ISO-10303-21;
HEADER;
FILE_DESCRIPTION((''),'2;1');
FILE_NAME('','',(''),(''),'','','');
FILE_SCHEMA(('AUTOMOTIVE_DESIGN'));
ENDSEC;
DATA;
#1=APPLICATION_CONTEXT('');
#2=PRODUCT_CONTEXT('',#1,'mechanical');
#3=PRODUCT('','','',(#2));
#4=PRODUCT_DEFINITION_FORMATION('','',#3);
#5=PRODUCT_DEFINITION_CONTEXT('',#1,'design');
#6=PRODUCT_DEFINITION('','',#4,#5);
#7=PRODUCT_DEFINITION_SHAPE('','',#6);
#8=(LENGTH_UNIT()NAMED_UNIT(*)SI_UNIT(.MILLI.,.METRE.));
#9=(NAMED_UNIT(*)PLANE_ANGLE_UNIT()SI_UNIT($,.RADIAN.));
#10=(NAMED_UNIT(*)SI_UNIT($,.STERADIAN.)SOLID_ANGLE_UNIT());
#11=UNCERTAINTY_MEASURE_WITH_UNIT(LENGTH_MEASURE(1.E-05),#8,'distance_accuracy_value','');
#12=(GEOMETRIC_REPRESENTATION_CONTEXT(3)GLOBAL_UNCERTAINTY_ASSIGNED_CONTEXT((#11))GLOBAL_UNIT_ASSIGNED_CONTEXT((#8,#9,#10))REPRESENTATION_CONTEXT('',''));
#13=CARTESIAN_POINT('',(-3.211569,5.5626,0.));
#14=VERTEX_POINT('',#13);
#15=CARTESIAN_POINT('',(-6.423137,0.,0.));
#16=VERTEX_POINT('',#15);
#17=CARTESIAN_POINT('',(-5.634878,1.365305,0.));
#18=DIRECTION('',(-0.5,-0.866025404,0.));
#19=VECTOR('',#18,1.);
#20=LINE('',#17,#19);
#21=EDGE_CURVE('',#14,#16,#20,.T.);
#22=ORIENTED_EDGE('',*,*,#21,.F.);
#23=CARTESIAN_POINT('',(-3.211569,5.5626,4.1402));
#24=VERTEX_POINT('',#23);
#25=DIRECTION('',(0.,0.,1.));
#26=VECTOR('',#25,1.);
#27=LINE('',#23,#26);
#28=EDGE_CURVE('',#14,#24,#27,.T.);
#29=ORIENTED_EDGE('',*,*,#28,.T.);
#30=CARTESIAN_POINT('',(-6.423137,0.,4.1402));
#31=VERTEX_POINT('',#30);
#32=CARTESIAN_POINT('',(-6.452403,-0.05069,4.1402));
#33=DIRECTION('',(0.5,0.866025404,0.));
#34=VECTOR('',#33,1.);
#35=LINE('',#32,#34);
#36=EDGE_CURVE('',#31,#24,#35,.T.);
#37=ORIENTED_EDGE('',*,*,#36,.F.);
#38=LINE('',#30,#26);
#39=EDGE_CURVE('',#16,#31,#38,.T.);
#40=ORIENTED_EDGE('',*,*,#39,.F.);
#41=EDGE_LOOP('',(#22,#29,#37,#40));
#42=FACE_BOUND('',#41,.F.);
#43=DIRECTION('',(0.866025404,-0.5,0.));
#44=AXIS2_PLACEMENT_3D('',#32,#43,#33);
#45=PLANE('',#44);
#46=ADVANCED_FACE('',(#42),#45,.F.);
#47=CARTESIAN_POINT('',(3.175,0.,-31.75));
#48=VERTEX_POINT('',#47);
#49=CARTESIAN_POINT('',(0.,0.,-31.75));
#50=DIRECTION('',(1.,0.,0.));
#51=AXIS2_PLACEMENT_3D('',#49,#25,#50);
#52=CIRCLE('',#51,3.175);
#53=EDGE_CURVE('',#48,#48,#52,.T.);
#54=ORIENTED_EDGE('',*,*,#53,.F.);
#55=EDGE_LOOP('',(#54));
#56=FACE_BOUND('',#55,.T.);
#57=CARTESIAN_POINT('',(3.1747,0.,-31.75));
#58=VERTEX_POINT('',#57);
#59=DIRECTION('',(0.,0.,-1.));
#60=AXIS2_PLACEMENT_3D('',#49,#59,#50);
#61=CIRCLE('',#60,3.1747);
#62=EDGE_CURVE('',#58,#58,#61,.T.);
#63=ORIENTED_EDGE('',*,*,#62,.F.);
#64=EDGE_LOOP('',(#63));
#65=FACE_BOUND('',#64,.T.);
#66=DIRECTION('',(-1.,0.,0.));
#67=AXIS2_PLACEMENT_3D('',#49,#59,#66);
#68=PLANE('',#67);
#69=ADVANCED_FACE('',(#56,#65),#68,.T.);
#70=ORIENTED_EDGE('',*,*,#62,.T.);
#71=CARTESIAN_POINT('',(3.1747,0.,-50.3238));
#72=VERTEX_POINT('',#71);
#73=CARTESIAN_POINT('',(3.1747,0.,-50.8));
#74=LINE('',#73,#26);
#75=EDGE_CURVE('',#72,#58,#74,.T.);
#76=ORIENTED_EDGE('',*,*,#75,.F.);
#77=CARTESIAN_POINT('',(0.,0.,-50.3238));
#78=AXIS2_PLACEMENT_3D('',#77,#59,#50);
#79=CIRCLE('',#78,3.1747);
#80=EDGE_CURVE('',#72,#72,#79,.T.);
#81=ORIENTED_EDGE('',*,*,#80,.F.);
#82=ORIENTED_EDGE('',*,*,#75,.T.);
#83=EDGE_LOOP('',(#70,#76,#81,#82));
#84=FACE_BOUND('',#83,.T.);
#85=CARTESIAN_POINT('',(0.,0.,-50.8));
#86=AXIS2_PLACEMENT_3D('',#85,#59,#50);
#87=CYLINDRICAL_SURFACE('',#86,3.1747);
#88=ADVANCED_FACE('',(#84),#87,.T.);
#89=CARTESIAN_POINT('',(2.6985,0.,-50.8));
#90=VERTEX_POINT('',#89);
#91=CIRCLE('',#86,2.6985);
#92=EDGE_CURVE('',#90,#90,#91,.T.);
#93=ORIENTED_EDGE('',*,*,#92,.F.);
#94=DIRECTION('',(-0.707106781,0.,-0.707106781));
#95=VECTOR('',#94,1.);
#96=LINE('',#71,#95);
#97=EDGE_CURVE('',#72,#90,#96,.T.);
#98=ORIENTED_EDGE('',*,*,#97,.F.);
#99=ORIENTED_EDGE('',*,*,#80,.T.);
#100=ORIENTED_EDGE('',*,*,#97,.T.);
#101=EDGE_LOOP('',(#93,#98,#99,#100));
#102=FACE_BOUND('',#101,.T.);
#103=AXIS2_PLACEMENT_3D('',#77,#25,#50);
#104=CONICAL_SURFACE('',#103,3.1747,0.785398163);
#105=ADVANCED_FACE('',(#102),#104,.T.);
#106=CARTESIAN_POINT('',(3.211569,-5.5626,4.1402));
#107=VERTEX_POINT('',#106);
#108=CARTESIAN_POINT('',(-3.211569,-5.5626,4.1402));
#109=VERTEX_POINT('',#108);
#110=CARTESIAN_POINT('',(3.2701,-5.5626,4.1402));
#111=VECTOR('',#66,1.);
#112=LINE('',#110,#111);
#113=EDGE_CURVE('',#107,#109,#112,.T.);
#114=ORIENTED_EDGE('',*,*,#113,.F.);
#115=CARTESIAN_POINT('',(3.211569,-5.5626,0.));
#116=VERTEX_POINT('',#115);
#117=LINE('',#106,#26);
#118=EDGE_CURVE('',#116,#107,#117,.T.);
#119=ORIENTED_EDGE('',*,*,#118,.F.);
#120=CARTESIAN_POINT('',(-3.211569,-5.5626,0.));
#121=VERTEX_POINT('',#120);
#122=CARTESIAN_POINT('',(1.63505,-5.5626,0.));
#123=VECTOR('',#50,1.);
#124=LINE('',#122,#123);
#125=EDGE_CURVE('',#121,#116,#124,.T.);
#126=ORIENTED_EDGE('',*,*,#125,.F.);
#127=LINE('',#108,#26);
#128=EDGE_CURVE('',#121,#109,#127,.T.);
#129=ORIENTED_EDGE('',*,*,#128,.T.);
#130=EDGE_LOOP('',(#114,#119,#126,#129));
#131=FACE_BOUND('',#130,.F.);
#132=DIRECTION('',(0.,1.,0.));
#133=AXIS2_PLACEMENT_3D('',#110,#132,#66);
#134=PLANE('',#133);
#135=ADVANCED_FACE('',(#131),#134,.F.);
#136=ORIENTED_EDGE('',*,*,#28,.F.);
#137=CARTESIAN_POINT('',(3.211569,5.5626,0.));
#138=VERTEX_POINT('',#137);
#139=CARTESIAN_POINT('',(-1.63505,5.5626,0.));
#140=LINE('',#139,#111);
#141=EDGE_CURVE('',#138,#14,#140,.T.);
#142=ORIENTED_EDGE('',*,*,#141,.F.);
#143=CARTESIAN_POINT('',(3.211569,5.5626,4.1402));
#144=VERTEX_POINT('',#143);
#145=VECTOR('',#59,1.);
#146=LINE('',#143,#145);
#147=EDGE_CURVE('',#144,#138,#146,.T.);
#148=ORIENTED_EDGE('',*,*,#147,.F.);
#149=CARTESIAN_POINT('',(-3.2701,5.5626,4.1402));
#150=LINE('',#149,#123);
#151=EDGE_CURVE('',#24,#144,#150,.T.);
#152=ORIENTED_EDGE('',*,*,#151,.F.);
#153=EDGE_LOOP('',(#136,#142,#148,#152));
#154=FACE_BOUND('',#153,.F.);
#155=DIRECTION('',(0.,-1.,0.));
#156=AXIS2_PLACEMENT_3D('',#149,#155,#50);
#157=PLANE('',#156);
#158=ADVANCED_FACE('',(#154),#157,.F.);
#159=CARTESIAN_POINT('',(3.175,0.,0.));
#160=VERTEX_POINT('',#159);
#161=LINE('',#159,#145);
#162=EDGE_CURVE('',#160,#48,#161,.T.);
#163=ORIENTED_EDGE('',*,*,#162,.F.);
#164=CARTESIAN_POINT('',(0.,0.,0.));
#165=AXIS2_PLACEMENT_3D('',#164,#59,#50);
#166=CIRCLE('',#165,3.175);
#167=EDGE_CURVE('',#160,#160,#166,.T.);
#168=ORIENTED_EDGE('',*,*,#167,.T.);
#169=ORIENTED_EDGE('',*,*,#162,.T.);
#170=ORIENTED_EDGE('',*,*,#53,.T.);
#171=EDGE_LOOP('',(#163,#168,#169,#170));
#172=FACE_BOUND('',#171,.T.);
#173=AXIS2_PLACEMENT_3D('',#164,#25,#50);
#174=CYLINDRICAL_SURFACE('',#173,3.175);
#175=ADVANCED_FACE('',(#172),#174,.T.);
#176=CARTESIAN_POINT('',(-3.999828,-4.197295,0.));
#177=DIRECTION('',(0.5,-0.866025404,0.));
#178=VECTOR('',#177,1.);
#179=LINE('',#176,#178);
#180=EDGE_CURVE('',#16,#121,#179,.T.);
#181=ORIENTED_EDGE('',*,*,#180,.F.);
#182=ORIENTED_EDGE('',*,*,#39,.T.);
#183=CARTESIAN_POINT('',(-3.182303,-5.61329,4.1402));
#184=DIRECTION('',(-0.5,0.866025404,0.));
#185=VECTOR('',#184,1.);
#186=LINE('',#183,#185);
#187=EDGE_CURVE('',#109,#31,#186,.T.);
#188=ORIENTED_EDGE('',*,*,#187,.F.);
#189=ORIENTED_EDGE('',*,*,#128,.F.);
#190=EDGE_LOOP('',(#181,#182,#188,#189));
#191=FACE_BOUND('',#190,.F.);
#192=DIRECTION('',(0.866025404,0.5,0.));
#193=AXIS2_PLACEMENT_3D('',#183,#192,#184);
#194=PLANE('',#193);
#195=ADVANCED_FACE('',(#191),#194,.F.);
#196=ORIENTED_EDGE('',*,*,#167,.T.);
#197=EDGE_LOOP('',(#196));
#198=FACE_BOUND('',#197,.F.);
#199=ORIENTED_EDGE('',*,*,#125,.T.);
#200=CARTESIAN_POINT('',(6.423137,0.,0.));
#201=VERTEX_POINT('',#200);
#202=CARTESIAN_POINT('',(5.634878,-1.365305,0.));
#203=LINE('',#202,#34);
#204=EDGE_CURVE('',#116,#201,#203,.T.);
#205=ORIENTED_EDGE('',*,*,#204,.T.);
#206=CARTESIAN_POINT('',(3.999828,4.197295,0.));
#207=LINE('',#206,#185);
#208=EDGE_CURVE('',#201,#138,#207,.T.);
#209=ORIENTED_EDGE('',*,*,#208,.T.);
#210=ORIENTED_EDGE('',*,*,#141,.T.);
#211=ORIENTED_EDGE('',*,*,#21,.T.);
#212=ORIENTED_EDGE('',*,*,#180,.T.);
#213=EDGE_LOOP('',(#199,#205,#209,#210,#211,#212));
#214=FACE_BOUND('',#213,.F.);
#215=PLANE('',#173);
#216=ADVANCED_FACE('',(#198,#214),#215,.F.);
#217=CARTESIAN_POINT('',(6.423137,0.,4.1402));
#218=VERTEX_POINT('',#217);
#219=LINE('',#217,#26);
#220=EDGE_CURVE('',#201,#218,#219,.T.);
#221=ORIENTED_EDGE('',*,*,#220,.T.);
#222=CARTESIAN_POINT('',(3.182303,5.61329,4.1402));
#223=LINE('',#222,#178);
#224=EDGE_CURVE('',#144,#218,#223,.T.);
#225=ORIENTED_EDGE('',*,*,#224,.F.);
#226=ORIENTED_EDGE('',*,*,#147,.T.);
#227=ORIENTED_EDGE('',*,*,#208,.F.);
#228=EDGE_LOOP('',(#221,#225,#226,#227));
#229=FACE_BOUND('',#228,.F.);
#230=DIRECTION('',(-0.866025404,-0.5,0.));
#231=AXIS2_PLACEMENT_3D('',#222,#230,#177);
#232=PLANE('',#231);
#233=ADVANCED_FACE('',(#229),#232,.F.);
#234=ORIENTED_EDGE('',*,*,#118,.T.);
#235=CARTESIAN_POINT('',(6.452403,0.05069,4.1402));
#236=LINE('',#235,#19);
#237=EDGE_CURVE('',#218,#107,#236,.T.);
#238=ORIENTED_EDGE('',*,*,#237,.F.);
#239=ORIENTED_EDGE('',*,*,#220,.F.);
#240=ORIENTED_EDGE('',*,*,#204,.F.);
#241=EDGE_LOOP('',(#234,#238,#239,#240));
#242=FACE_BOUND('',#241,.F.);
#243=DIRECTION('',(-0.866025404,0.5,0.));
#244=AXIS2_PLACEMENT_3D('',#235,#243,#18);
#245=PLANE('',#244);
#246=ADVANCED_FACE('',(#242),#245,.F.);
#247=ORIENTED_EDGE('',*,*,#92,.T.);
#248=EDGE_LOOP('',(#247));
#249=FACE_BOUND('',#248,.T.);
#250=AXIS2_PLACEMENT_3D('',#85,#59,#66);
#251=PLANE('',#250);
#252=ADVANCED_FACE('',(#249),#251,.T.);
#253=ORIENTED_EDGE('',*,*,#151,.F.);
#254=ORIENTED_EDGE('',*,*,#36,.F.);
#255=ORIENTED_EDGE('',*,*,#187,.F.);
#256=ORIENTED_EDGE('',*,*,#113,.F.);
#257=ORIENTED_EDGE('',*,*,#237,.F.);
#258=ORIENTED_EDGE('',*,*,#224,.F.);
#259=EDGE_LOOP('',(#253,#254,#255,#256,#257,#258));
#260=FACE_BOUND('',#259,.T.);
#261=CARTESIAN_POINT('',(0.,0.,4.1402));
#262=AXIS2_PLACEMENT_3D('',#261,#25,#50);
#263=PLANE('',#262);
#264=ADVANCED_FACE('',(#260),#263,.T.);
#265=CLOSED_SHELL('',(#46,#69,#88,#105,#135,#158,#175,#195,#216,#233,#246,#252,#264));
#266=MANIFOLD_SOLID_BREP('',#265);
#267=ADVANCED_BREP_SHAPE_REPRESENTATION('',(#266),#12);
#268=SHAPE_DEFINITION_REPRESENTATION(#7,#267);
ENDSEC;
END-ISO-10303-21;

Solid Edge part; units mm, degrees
sketch "Sketch1" plane through (0, 0, 0) normal (0, 0, 1) x (1, 0, 0)
  circle A0 centre (0, 0) radius 6.4526
  dimension "D1" = 12.9052
extrude "Protrusion1" add sketch "Sketch1" along normal blind 4.1402
sketch "Sketch2" plane through (0, 0, 0) normal (0, 0, -1) x (1, 0, 0)
  circle A0 centre (0, 0) radius 3.175
extrude "Protrusion2" add sketch "Sketch2" along normal blind 50.8
sketch "Sketch3" plane through (0, 0, -50.8) normal (0, 0, -1) x (1, 0, 0)
  circle A0 centre (0, 0) radius 3.1747
extrude "Cutout1" cut sketch "Sketch3" against normal blind 19.05 flip side to cut
chamfer "Chamfer_1" distance 0.4762 angle 45 1 edges at (-3.1747, 0, -50.8)
sketch "Sketch4" plane through (0, 0, 4.1402) normal (0, 0, 1) x (1, 0, 0)
  line L0 (-3.2701, 5.5626) -> (3.2701, 5.5626)
  dimension "D1" = 11.1252
extrude "Cutout2" cut sketch "Sketch4" against normal up to next material side at (0, 5.6126, 4.1402)
pattern_circular "Pattern1" count 6 over 360 about axis through (0, 0, 4.1402) along (0, 0, 1) of "Cutout2"
properties part number "24102230"
